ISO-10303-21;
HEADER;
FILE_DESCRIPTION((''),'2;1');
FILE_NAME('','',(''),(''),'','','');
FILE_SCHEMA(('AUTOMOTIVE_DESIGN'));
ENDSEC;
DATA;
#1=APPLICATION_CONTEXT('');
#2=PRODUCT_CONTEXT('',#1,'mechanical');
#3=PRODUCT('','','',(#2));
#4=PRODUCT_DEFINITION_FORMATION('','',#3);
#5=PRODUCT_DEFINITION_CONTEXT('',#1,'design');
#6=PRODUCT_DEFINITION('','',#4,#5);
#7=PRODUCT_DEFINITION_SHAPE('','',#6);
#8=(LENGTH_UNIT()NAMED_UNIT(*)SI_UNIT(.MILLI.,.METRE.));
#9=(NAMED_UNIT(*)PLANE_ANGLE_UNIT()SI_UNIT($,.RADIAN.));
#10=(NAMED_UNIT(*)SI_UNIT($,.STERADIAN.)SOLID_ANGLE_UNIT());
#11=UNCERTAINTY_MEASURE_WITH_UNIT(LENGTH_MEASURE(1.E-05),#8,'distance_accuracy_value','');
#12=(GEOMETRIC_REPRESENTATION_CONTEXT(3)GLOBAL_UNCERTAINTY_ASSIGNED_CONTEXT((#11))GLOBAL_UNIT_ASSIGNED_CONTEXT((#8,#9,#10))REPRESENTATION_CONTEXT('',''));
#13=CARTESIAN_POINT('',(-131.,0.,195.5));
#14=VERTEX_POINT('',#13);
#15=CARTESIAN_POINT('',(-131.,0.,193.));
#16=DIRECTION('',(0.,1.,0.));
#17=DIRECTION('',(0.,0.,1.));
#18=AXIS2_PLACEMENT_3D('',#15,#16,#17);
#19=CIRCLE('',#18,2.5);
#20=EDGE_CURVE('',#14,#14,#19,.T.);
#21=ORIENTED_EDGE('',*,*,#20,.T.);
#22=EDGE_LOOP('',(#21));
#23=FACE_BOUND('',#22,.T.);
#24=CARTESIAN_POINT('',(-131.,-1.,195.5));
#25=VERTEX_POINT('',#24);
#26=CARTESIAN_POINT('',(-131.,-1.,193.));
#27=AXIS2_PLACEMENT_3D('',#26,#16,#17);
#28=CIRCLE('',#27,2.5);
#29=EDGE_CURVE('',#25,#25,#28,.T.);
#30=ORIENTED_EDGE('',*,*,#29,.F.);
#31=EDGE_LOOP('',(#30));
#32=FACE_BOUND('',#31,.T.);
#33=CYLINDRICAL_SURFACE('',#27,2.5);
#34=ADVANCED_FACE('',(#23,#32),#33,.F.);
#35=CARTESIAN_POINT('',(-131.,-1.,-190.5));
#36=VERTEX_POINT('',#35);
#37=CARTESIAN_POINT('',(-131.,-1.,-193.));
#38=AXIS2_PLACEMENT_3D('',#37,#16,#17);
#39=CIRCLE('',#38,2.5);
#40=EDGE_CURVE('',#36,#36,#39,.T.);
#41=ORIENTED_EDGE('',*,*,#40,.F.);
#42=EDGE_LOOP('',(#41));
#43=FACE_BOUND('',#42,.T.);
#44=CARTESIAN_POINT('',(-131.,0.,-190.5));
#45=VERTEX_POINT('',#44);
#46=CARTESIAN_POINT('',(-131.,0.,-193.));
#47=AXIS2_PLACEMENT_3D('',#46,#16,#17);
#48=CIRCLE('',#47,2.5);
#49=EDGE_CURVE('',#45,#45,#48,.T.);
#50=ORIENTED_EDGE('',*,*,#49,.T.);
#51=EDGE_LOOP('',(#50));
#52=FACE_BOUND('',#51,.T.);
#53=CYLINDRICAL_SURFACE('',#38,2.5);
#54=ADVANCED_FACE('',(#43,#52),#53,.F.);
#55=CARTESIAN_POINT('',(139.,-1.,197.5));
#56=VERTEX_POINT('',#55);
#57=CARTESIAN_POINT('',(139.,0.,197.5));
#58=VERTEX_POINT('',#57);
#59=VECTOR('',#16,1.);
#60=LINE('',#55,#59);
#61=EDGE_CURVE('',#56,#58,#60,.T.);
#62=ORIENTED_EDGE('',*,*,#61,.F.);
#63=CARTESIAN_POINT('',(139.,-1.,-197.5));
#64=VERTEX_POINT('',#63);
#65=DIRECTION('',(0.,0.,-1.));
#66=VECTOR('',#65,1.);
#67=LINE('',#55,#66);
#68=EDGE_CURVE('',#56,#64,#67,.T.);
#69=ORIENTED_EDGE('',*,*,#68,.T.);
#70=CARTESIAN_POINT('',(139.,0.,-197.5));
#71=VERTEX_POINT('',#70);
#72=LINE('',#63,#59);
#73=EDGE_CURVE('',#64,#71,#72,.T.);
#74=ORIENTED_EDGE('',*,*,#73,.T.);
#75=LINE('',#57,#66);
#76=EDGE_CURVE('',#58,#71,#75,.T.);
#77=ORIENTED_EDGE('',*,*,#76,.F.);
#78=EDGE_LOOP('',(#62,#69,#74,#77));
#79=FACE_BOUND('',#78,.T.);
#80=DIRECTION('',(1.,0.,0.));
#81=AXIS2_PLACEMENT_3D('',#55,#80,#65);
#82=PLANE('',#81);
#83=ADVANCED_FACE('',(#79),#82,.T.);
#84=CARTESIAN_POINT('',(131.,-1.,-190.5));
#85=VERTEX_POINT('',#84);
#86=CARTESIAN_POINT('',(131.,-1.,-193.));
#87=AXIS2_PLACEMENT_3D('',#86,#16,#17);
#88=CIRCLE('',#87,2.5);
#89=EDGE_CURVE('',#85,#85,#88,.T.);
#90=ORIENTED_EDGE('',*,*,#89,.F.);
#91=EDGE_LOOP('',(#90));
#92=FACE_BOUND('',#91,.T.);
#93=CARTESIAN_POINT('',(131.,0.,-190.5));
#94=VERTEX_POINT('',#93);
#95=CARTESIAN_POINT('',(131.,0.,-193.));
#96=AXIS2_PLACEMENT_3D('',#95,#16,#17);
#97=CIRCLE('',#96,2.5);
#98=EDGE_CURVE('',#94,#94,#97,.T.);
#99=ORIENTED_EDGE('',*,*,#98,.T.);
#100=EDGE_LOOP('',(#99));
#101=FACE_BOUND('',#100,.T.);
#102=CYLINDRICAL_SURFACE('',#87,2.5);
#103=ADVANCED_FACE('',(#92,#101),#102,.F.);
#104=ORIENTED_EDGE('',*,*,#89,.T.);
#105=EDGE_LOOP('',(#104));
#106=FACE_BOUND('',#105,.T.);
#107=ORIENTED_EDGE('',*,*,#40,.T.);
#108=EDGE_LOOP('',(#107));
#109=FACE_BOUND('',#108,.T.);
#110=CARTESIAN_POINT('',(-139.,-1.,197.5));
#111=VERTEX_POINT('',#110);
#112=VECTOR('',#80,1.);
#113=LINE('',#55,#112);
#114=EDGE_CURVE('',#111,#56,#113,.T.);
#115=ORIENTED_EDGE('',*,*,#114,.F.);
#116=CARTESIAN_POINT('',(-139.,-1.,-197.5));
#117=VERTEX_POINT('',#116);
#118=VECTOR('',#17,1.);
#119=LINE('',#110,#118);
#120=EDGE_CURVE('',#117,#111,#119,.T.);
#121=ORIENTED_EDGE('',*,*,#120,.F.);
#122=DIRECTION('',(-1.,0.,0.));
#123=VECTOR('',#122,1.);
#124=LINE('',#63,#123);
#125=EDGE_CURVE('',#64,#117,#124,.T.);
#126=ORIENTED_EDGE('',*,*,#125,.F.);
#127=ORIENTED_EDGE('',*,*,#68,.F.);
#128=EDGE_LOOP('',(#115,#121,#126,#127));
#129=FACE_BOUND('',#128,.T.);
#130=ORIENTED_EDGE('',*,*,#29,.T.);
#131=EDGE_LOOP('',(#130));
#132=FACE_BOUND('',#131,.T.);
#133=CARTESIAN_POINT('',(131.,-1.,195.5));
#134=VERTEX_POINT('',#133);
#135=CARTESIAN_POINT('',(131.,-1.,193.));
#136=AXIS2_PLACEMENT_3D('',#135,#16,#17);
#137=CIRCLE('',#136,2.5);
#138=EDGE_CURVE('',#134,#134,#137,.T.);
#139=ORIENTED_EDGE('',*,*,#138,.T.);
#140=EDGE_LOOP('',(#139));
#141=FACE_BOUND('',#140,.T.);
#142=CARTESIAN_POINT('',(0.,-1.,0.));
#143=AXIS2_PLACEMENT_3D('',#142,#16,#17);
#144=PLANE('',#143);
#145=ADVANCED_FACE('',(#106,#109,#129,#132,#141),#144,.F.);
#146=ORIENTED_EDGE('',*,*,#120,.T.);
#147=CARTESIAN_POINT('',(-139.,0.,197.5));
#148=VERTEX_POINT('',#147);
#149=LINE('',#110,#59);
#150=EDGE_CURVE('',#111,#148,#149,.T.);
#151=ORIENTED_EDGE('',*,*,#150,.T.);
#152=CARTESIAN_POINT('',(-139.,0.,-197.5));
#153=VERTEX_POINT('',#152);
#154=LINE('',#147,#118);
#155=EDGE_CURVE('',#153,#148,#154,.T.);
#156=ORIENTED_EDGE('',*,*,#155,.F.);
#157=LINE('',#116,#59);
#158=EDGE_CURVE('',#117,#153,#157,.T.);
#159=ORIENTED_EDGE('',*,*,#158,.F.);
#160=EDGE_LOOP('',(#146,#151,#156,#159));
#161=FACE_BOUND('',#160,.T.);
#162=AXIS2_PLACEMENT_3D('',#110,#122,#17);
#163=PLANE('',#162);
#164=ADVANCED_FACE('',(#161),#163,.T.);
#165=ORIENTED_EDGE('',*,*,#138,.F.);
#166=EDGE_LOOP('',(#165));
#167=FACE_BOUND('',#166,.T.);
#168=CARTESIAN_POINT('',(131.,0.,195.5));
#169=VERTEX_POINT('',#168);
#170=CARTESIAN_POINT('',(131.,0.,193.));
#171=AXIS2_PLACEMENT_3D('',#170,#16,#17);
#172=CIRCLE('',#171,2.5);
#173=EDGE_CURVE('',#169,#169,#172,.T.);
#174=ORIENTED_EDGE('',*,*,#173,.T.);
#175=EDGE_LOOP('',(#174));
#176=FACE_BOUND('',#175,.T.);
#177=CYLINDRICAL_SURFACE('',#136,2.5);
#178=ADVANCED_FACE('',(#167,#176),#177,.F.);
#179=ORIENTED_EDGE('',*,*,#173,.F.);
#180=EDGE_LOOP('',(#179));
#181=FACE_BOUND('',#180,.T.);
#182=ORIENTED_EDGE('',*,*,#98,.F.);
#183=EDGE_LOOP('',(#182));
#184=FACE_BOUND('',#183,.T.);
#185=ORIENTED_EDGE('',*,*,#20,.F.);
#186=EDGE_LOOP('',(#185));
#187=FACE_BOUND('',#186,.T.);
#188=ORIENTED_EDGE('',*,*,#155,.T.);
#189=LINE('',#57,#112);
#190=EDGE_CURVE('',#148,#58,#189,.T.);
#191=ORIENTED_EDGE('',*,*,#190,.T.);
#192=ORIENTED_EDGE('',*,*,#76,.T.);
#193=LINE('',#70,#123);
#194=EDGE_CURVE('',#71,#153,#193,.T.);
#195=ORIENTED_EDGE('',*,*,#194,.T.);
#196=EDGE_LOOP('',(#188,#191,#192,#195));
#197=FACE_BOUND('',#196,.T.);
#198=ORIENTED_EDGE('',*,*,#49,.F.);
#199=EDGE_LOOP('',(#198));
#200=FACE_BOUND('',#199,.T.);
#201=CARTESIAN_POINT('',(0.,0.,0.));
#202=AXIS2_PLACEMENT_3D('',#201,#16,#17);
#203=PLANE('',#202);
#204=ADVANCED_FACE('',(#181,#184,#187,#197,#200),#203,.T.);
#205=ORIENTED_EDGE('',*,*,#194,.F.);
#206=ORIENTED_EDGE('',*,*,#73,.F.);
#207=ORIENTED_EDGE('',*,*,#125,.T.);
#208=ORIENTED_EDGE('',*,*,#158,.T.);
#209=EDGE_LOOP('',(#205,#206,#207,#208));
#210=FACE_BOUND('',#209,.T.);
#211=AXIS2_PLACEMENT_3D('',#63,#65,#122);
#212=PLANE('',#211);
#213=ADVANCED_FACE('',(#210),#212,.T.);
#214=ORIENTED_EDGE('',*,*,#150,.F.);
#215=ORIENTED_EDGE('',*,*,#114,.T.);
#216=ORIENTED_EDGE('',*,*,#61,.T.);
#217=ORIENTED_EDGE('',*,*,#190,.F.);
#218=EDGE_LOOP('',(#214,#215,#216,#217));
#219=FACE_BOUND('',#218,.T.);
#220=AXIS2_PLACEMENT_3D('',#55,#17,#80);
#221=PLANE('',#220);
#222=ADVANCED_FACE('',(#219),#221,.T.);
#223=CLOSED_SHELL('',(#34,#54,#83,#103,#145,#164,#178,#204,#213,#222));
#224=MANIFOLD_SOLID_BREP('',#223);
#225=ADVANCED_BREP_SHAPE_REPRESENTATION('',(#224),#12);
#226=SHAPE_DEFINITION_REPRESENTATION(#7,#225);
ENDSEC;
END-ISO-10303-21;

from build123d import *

# Parameters (mm, degrees)
SKETCH1_W          = 278
SKETCH1_H          = 395
BASE_FLANGE1_DEPTH = 1
SKETCH6_R          = 2.5
SCREW_DEPTH        = 242.512422041


# Sheet-metal steps are written as plain solids
with BuildPart() as part:
    # Sketch1 → Base-Flange1 (new body)
    with BuildSketch(Plane(origin=(0, 0, 0), x_dir=(1, 0, 0), z_dir=(0, 1, 0))):
        Rectangle(SKETCH1_W, SKETCH1_H)
    extrude(amount=-BASE_FLANGE1_DEPTH)

    # Sketch6 → Screw (cut, through all)
    with BuildSketch(Plane(origin=(0, 0, 0), x_dir=(1, 0, 0), z_dir=(0, 1, 0))):
        with Locations(Location((-131, 193, 0), (0, 0, 270))):
            Circle(SKETCH6_R)
        with Locations(Location((131, 193, 0), (0, 0, 270))):
            Circle(SKETCH6_R)
        with Locations(Location((131, -193, 0), (0, 0, 270))):
            Circle(SKETCH6_R)
        with Locations(Location((-131, -193, 0), (0, 0, 270))):
            Circle(SKETCH6_R)
    extrude(amount=-SCREW_DEPTH, mode=Mode.SUBTRACT)


solid = part.part
